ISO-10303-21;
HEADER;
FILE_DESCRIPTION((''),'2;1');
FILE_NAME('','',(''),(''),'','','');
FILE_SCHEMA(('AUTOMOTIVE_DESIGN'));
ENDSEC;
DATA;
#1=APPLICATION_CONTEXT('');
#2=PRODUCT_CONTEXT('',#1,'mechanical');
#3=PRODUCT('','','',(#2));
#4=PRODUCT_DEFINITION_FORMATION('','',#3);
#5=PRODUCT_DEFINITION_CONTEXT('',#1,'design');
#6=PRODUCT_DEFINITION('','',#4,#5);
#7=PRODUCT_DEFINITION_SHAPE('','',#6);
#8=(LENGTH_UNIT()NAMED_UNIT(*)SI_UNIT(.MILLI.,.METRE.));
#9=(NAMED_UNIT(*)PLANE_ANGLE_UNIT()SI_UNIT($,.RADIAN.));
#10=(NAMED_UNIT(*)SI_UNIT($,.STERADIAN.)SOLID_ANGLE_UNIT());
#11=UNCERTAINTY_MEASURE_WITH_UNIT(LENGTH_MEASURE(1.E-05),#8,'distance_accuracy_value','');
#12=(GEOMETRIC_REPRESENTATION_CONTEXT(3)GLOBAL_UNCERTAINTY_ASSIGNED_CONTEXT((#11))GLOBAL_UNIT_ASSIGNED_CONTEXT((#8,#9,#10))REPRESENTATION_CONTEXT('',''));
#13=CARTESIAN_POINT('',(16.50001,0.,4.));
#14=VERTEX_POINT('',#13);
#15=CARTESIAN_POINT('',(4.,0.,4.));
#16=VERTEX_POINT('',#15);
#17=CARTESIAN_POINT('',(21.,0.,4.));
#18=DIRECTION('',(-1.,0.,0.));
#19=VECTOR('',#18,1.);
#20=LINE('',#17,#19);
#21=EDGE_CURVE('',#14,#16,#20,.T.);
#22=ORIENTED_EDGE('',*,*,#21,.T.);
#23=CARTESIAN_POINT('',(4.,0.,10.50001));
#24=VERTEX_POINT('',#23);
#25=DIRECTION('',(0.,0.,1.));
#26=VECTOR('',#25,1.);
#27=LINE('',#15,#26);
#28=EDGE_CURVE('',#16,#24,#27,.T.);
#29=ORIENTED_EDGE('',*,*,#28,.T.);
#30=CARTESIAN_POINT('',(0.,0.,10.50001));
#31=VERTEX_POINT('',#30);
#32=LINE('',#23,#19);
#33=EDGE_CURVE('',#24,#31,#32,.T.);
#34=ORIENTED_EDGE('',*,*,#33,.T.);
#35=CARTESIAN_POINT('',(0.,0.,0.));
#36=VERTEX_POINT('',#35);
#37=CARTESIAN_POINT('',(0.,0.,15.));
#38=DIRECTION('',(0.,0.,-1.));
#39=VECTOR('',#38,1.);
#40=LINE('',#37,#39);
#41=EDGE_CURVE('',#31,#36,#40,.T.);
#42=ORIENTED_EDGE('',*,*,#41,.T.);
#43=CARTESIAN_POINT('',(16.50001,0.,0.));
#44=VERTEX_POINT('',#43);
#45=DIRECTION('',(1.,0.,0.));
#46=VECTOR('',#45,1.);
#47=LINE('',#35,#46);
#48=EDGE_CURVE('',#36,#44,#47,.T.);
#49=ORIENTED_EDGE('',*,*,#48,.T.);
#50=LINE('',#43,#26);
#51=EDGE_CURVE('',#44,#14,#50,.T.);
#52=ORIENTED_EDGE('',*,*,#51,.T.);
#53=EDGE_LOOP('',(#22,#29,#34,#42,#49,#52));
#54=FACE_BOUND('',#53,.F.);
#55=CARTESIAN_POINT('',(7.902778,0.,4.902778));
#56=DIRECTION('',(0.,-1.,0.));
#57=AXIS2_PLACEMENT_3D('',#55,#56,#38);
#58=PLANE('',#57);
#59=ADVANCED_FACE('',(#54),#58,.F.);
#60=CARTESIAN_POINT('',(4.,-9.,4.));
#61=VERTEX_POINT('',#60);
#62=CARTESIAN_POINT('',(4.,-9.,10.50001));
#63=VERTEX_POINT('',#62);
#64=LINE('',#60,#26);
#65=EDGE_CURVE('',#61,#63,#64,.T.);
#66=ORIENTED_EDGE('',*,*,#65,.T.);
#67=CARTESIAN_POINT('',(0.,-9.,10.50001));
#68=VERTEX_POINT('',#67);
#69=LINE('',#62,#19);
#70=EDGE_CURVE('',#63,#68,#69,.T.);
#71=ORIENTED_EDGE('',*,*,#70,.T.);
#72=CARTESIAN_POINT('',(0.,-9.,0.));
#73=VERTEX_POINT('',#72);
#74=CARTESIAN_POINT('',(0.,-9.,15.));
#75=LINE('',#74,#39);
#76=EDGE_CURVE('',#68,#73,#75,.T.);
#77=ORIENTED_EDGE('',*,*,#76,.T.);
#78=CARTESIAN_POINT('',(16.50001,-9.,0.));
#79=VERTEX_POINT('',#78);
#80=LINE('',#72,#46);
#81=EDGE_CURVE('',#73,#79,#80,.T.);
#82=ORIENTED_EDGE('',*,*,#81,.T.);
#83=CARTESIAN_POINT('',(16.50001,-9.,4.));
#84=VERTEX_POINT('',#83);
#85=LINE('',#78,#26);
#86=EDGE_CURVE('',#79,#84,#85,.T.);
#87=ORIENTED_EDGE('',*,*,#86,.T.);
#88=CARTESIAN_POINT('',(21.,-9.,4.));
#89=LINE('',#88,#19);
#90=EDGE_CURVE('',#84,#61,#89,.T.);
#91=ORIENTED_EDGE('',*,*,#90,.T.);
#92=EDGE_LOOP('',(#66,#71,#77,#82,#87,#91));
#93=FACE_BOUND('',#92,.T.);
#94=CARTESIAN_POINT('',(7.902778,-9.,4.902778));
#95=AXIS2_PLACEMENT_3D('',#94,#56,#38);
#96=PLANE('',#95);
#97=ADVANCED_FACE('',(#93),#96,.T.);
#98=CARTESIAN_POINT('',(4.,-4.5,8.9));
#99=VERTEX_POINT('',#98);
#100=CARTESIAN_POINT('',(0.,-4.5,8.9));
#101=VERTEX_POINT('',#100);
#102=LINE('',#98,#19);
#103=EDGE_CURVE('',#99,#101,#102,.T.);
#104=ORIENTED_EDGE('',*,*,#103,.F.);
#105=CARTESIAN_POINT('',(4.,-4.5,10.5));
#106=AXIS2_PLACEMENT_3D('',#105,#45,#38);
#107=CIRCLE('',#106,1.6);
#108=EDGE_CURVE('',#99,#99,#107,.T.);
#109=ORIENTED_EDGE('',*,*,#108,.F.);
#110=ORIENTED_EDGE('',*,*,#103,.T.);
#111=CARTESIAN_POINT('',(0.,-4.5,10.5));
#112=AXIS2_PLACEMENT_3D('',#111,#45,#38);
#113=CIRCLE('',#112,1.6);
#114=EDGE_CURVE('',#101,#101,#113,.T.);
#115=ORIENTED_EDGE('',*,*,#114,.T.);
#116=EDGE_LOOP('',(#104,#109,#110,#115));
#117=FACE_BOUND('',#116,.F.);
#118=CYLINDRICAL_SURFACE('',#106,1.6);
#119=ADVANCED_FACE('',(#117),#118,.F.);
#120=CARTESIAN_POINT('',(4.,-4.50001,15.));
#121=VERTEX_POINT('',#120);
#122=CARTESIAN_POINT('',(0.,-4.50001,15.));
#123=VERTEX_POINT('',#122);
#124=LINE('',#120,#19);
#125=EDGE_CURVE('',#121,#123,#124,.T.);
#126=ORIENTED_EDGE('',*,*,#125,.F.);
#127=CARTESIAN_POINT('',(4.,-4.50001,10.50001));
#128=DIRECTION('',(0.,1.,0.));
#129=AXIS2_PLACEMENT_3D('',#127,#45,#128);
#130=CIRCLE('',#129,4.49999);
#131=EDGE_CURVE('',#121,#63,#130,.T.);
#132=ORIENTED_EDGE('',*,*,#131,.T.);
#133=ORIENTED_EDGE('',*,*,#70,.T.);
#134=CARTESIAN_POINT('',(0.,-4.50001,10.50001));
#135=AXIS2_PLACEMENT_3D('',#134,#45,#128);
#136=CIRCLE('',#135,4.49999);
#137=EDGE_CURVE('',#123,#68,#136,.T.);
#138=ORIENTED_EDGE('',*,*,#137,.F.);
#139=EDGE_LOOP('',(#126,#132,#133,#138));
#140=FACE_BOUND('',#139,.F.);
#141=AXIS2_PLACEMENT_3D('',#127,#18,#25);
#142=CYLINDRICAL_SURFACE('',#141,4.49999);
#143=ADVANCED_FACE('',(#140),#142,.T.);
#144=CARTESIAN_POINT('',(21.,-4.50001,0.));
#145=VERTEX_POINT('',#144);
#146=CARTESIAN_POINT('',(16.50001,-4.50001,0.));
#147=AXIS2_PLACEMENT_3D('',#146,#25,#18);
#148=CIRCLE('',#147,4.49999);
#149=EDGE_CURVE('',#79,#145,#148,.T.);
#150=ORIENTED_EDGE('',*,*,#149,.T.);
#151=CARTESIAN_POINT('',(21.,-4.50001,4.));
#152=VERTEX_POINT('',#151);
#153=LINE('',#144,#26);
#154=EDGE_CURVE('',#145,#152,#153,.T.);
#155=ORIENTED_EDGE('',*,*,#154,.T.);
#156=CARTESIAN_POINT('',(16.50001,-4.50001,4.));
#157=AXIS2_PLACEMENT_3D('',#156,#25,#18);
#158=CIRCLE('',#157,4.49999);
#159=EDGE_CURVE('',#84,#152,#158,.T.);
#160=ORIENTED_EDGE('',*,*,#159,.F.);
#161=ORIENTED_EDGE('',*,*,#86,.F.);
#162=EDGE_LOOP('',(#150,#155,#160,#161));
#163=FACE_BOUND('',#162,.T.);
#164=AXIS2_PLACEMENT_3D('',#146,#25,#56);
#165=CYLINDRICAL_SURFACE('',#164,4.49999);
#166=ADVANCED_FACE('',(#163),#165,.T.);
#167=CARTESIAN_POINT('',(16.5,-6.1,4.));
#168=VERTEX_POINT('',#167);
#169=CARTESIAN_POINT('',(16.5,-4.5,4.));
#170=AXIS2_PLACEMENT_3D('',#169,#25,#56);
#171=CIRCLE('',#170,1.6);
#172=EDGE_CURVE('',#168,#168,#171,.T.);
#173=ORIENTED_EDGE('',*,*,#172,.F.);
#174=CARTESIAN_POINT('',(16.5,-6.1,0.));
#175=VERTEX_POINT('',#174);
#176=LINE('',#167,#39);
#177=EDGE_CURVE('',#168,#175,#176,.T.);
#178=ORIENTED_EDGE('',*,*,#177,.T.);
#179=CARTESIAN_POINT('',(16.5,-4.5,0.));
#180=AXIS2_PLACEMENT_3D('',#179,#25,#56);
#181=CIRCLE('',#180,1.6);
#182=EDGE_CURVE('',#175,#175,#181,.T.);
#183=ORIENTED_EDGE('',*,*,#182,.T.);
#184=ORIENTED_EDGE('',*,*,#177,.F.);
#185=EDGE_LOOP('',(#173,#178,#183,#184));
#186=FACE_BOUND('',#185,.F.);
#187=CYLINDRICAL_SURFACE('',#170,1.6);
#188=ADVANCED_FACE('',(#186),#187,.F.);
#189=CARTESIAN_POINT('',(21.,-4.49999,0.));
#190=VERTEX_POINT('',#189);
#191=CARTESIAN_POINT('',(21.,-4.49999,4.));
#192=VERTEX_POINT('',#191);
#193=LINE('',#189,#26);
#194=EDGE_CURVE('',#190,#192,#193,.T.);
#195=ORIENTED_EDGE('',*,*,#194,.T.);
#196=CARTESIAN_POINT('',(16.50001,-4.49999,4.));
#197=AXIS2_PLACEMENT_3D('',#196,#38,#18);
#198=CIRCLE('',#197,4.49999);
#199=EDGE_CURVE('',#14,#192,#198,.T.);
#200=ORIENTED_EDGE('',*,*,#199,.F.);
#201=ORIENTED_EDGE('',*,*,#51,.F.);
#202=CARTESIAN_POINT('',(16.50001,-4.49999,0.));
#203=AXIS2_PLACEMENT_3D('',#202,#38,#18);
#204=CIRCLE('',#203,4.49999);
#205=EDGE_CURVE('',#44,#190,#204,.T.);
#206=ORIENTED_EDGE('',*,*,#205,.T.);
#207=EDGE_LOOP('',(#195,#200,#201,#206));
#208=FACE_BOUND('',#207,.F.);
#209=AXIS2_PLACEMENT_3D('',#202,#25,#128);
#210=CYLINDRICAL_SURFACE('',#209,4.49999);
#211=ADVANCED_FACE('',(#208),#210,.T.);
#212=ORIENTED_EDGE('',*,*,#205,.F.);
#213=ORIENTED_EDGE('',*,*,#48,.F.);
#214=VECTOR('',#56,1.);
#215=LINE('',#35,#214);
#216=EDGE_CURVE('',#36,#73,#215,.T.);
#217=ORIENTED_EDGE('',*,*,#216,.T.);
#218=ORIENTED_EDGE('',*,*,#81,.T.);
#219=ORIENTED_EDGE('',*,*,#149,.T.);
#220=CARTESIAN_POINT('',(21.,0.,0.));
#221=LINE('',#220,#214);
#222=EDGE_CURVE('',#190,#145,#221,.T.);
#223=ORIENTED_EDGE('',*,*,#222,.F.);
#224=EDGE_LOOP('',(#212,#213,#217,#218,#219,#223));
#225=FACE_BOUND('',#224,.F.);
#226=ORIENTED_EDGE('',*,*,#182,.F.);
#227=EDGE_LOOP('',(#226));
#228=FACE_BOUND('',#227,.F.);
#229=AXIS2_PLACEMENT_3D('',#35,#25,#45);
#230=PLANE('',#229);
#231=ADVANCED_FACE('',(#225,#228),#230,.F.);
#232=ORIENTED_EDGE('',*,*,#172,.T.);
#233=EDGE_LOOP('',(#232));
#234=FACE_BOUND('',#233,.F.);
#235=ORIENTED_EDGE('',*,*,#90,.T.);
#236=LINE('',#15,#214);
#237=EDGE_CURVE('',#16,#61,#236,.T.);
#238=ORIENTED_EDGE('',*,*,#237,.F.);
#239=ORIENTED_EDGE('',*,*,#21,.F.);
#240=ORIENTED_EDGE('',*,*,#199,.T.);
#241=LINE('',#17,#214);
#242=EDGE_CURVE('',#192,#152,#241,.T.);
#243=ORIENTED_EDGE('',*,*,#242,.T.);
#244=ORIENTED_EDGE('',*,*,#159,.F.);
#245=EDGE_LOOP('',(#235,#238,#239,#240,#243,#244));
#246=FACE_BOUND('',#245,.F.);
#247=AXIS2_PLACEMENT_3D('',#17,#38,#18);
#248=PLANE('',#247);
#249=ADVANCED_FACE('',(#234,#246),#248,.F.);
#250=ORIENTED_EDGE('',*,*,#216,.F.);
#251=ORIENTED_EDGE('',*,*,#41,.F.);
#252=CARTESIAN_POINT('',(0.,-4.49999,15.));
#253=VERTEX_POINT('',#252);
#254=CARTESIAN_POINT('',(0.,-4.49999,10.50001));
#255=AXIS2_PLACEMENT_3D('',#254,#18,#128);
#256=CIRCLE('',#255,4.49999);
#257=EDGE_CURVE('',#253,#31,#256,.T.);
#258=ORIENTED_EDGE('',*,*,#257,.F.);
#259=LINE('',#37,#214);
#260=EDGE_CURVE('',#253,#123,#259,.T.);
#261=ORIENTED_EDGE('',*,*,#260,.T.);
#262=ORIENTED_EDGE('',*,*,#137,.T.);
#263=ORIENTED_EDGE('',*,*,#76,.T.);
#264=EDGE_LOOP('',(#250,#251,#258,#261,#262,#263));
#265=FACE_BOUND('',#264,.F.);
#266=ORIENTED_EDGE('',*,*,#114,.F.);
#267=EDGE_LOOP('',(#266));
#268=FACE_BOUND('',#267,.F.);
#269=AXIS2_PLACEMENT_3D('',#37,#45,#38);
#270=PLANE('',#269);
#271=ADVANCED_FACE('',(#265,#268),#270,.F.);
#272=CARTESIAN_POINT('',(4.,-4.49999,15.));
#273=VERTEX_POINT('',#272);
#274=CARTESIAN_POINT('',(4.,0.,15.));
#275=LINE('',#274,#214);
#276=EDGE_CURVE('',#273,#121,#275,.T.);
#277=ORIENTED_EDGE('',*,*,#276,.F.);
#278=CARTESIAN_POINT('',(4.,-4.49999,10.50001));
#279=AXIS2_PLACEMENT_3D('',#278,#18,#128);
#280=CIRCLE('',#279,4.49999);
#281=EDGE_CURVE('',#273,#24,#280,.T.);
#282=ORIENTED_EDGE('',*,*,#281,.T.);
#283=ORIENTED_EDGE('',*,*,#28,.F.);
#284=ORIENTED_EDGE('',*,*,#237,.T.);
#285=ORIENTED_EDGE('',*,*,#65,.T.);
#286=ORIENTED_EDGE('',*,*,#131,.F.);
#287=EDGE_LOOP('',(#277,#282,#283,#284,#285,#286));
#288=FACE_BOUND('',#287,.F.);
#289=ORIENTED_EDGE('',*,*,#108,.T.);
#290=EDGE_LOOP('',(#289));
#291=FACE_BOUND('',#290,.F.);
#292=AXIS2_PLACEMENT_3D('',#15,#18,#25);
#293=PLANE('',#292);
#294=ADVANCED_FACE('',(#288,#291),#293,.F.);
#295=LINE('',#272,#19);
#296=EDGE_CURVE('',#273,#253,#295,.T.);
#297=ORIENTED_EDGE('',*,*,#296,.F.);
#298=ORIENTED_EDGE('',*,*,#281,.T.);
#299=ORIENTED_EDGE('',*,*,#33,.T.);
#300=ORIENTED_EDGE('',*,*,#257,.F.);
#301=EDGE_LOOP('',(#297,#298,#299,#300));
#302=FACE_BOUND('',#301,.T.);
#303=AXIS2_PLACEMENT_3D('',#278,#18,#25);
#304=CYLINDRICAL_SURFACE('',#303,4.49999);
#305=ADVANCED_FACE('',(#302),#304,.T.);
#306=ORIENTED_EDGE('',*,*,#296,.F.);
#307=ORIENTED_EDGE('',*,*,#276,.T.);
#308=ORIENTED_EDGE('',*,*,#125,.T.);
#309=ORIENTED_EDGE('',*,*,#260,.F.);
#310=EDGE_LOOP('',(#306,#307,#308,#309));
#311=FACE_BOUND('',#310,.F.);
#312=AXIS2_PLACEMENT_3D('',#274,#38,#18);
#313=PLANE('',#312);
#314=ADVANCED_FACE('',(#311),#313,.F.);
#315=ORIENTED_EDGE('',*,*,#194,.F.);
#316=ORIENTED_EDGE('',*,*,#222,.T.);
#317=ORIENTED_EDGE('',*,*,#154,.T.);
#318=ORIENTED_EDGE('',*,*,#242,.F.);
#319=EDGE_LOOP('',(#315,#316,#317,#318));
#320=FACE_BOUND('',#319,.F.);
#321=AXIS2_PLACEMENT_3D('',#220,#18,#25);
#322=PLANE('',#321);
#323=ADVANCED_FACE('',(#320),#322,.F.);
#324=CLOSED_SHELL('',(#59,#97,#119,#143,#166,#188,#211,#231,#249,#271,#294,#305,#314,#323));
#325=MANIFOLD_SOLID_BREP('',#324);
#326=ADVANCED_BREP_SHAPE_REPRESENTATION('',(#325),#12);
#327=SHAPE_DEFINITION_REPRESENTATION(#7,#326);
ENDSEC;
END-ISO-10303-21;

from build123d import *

# Parameters (mm, degrees)
F1_DEPTH = 9
F2_R     = 1.6
F3_DEPTH = 25
F4_R     = 1.6
F5_DEPTH = 25
F6_R     = 4.49999
F7_ANGLE = 90


# Not quite as in the source:
# - a fillet or chamfer is up to 0.001 mm smaller than in the source, because OpenCascade refuses the exact size


with BuildPart() as f1:
    # F0 (on Front) → F1 (new body)
    with BuildSketch(Plane.XZ):
        Polygon((-15, 4), (-15, 0), (0, 0), (0, 21), (-4, 21), (-4, 4), align=None)
    extrude(amount=F1_DEPTH)

    # F2 (on face) → F3 (cut)
    with BuildSketch(Plane.XY.offset(4)):
        with Locations((-10.5, -4.5)):
            Circle(F2_R)
    extrude(amount=-F3_DEPTH, mode=Mode.SUBTRACT)

    # F4 (on face) → F5 (cut)
    with BuildSketch(Plane(origin=(-4, 0, 0), x_dir=(0, -1, 0), z_dir=(-1, 0, 0))):
        with Locations((4.5, 16.5)):
            Circle(F4_R)
    extrude(amount=-F5_DEPTH, mode=Mode.SUBTRACT)

    # F6 (radius 4.5 in the source; OpenCascade refuses exactly that, so slightly less here)
    f6_edges = [f1.edges().sort_by_distance(p)[0] for p in [
        (-2, -9, 21),
        (-2, 0, 21),
        (-15, 0, 2),
        (-15, -9, 2),
    ]]
    fillet(f6_edges, radius=F6_R)


with BuildPart() as f1_1:
    # F7: moved
    add(f1.part.rotate(Axis((0, -4.5, 0), (0, 1, 0)), F7_ANGLE))


solid = f1_1.part
